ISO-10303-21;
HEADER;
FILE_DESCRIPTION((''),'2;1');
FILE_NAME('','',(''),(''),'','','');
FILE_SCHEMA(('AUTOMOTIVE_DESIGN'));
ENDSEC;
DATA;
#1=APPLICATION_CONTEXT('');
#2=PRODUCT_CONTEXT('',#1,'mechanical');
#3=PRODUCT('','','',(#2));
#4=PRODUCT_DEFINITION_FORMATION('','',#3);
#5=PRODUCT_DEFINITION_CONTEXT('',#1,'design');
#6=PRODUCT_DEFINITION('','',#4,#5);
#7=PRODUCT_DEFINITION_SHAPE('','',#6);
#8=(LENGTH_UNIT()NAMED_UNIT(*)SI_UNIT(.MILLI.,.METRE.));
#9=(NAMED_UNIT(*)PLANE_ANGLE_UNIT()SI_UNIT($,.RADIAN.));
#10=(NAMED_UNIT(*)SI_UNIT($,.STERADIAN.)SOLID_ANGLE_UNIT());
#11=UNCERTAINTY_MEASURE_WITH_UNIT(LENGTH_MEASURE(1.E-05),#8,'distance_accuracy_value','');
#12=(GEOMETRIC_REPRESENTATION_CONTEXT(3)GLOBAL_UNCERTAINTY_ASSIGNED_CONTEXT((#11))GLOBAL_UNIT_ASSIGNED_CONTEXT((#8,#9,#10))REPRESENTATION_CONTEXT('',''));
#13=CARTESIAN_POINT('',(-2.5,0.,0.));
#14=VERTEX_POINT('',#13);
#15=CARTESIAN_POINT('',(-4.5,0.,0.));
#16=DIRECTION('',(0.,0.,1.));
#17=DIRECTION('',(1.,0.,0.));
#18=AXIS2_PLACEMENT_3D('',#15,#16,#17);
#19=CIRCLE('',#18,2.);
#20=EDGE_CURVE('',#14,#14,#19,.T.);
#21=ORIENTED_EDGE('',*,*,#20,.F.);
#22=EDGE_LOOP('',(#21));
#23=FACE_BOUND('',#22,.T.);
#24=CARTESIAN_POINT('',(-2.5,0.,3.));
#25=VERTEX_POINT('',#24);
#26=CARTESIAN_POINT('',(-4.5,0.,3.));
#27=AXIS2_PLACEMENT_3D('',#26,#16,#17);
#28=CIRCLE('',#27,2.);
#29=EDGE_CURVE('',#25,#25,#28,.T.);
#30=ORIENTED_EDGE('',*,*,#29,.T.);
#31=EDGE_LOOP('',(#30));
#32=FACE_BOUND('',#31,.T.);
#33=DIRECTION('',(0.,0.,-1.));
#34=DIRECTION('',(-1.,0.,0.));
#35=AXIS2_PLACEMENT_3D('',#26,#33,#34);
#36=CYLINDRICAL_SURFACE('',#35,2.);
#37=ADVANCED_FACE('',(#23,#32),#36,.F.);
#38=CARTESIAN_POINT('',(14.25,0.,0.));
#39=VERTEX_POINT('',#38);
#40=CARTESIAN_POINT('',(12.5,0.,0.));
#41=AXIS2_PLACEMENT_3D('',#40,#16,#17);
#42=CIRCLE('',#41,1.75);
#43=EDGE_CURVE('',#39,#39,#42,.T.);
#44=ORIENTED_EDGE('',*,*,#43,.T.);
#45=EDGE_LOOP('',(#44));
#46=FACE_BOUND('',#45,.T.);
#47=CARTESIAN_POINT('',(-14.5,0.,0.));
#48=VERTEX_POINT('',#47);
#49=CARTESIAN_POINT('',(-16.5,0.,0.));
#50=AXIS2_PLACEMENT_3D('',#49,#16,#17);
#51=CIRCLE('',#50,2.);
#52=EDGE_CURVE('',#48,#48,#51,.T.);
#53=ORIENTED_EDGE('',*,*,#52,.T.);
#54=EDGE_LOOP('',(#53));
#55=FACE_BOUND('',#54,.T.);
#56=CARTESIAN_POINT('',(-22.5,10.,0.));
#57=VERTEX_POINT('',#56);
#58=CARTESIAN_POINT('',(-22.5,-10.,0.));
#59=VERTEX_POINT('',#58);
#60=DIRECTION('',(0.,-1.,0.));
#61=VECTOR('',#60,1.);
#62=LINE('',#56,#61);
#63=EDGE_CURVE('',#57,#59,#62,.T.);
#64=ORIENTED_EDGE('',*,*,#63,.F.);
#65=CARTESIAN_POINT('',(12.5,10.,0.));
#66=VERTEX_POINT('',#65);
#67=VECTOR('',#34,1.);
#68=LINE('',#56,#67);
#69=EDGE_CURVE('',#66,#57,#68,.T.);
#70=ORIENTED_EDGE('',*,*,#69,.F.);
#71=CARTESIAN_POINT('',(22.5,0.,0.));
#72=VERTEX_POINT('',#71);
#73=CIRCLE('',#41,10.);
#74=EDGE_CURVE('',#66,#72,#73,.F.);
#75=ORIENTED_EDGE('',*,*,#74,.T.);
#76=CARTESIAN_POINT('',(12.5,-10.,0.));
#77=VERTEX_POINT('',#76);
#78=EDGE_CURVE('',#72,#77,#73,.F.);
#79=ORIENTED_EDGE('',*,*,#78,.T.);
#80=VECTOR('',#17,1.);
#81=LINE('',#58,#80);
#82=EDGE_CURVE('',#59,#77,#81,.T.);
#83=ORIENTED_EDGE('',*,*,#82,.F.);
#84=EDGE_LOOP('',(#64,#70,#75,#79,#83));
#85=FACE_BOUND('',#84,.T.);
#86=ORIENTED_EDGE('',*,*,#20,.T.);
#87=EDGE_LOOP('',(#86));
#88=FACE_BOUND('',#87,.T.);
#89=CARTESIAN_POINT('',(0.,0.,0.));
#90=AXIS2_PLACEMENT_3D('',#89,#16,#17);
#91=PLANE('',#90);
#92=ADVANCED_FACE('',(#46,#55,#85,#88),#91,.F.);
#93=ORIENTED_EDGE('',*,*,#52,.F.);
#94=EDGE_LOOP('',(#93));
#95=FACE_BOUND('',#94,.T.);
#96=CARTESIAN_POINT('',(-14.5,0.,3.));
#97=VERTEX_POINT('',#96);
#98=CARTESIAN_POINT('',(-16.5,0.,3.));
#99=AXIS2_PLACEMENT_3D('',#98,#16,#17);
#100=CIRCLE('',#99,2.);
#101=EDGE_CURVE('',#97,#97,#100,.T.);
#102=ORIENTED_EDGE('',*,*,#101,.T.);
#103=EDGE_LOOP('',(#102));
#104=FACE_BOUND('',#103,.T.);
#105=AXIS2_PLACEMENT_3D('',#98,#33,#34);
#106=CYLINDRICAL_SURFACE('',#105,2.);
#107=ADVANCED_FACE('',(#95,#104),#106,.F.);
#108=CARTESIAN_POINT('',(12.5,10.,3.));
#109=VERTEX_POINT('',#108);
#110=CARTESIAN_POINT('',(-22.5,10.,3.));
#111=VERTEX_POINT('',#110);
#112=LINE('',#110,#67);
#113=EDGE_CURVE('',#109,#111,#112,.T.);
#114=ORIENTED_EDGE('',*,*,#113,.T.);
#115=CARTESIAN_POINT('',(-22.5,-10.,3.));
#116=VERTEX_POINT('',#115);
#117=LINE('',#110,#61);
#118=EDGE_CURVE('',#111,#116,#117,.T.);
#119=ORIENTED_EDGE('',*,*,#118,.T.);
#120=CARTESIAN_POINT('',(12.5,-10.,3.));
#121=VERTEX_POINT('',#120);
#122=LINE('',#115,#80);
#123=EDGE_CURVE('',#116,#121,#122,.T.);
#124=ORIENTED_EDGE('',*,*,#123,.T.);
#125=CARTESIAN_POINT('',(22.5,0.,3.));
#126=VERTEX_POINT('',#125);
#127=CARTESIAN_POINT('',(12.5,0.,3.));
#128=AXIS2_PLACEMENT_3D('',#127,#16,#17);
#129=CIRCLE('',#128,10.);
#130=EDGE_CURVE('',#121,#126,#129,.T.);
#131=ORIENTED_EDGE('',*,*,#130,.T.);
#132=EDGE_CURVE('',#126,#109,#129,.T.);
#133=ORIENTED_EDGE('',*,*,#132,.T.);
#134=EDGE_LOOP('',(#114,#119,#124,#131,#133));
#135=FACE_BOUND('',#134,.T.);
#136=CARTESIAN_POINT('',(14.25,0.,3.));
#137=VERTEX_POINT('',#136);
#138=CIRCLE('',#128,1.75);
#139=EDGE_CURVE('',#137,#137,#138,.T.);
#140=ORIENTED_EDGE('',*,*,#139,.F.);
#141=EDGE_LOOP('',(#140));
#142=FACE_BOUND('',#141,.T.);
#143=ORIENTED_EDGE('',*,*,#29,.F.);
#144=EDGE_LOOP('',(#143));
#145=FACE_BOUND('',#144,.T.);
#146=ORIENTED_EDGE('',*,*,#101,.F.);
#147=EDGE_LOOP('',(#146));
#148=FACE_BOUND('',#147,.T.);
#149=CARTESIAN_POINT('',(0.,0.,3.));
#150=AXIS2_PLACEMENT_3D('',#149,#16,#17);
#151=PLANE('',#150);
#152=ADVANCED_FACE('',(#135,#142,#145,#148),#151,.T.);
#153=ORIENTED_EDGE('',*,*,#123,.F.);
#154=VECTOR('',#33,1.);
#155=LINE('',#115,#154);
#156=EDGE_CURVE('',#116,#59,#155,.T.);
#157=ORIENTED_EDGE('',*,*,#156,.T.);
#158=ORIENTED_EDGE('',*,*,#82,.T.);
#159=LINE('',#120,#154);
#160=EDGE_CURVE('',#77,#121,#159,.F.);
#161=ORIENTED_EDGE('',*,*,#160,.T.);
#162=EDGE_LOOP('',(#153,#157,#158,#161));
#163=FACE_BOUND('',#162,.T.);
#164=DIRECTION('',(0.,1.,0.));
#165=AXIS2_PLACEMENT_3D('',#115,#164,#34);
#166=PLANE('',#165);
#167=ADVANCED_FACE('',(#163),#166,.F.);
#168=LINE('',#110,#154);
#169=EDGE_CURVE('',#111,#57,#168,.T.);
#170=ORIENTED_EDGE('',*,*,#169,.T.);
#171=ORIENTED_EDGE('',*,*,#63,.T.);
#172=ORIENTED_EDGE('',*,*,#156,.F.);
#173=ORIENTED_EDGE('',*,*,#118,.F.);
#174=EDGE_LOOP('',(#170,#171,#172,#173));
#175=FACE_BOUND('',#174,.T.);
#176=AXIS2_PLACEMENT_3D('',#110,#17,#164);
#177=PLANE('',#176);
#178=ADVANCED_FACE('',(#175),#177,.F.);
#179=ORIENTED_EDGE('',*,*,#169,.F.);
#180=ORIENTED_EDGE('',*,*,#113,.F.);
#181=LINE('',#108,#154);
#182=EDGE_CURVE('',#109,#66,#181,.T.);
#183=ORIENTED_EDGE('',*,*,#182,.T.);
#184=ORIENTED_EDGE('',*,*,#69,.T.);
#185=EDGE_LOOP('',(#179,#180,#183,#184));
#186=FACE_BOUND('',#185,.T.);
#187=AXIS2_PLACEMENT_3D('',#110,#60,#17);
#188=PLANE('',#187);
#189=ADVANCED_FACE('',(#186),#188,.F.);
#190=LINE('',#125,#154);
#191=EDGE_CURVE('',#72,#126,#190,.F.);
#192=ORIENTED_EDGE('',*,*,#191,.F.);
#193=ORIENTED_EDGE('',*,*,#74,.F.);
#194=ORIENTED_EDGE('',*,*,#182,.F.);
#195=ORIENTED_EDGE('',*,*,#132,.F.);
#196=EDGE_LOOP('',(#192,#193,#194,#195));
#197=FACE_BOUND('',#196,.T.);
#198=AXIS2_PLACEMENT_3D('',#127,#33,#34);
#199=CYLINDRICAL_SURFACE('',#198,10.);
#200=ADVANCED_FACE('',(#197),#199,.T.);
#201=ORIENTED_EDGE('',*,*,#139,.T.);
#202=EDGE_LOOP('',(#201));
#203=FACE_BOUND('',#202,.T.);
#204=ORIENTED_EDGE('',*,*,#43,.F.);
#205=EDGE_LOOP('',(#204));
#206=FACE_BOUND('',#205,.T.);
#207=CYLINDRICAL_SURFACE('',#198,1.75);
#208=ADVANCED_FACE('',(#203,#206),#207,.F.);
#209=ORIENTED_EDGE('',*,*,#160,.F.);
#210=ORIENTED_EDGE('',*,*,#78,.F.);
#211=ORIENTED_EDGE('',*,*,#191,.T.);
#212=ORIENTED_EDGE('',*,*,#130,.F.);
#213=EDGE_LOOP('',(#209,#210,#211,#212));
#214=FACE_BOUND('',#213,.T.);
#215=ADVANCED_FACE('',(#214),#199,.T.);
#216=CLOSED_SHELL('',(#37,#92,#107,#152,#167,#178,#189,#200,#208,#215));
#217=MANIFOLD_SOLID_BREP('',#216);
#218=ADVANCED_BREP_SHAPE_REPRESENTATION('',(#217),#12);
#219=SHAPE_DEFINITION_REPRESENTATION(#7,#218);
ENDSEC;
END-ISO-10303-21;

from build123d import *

# Parameters (mm, degrees)
ESBO_O1_W                = 45
ESBO_O1_H                = 20
ESBO_O1_R                = 2
ESBO_O1_R_2              = 1.75
RESSALTO_EXTRUS_O1_DEPTH = 3
FILETE1_R                = 10


with BuildPart() as part:
    # Esboço1 → Ressalto-extrusão1 (new body)
    with BuildSketch(Plane.XY):
        Rectangle(ESBO_O1_W, ESBO_O1_H)
        with Locations((-16.5, 0)):
            Circle(ESBO_O1_R, mode=Mode.SUBTRACT)
        with Locations((-4.5, 0)):
            Circle(ESBO_O1_R, mode=Mode.SUBTRACT)
        with Locations((12.5, 0)):
            Circle(ESBO_O1_R_2, mode=Mode.SUBTRACT)
    extrude(amount=RESSALTO_EXTRUS_O1_DEPTH)

    # Filete1
    filete1_edges = [part.edges().sort_by_distance(p)[0] for p in [
        (22.5, -10, 1.5),
        (22.5, 10, 1.5),
    ]]
    fillet(filete1_edges, radius=FILETE1_R - 0.0001)  # a hair under: the kernel refuses the full size


solid = part.part
